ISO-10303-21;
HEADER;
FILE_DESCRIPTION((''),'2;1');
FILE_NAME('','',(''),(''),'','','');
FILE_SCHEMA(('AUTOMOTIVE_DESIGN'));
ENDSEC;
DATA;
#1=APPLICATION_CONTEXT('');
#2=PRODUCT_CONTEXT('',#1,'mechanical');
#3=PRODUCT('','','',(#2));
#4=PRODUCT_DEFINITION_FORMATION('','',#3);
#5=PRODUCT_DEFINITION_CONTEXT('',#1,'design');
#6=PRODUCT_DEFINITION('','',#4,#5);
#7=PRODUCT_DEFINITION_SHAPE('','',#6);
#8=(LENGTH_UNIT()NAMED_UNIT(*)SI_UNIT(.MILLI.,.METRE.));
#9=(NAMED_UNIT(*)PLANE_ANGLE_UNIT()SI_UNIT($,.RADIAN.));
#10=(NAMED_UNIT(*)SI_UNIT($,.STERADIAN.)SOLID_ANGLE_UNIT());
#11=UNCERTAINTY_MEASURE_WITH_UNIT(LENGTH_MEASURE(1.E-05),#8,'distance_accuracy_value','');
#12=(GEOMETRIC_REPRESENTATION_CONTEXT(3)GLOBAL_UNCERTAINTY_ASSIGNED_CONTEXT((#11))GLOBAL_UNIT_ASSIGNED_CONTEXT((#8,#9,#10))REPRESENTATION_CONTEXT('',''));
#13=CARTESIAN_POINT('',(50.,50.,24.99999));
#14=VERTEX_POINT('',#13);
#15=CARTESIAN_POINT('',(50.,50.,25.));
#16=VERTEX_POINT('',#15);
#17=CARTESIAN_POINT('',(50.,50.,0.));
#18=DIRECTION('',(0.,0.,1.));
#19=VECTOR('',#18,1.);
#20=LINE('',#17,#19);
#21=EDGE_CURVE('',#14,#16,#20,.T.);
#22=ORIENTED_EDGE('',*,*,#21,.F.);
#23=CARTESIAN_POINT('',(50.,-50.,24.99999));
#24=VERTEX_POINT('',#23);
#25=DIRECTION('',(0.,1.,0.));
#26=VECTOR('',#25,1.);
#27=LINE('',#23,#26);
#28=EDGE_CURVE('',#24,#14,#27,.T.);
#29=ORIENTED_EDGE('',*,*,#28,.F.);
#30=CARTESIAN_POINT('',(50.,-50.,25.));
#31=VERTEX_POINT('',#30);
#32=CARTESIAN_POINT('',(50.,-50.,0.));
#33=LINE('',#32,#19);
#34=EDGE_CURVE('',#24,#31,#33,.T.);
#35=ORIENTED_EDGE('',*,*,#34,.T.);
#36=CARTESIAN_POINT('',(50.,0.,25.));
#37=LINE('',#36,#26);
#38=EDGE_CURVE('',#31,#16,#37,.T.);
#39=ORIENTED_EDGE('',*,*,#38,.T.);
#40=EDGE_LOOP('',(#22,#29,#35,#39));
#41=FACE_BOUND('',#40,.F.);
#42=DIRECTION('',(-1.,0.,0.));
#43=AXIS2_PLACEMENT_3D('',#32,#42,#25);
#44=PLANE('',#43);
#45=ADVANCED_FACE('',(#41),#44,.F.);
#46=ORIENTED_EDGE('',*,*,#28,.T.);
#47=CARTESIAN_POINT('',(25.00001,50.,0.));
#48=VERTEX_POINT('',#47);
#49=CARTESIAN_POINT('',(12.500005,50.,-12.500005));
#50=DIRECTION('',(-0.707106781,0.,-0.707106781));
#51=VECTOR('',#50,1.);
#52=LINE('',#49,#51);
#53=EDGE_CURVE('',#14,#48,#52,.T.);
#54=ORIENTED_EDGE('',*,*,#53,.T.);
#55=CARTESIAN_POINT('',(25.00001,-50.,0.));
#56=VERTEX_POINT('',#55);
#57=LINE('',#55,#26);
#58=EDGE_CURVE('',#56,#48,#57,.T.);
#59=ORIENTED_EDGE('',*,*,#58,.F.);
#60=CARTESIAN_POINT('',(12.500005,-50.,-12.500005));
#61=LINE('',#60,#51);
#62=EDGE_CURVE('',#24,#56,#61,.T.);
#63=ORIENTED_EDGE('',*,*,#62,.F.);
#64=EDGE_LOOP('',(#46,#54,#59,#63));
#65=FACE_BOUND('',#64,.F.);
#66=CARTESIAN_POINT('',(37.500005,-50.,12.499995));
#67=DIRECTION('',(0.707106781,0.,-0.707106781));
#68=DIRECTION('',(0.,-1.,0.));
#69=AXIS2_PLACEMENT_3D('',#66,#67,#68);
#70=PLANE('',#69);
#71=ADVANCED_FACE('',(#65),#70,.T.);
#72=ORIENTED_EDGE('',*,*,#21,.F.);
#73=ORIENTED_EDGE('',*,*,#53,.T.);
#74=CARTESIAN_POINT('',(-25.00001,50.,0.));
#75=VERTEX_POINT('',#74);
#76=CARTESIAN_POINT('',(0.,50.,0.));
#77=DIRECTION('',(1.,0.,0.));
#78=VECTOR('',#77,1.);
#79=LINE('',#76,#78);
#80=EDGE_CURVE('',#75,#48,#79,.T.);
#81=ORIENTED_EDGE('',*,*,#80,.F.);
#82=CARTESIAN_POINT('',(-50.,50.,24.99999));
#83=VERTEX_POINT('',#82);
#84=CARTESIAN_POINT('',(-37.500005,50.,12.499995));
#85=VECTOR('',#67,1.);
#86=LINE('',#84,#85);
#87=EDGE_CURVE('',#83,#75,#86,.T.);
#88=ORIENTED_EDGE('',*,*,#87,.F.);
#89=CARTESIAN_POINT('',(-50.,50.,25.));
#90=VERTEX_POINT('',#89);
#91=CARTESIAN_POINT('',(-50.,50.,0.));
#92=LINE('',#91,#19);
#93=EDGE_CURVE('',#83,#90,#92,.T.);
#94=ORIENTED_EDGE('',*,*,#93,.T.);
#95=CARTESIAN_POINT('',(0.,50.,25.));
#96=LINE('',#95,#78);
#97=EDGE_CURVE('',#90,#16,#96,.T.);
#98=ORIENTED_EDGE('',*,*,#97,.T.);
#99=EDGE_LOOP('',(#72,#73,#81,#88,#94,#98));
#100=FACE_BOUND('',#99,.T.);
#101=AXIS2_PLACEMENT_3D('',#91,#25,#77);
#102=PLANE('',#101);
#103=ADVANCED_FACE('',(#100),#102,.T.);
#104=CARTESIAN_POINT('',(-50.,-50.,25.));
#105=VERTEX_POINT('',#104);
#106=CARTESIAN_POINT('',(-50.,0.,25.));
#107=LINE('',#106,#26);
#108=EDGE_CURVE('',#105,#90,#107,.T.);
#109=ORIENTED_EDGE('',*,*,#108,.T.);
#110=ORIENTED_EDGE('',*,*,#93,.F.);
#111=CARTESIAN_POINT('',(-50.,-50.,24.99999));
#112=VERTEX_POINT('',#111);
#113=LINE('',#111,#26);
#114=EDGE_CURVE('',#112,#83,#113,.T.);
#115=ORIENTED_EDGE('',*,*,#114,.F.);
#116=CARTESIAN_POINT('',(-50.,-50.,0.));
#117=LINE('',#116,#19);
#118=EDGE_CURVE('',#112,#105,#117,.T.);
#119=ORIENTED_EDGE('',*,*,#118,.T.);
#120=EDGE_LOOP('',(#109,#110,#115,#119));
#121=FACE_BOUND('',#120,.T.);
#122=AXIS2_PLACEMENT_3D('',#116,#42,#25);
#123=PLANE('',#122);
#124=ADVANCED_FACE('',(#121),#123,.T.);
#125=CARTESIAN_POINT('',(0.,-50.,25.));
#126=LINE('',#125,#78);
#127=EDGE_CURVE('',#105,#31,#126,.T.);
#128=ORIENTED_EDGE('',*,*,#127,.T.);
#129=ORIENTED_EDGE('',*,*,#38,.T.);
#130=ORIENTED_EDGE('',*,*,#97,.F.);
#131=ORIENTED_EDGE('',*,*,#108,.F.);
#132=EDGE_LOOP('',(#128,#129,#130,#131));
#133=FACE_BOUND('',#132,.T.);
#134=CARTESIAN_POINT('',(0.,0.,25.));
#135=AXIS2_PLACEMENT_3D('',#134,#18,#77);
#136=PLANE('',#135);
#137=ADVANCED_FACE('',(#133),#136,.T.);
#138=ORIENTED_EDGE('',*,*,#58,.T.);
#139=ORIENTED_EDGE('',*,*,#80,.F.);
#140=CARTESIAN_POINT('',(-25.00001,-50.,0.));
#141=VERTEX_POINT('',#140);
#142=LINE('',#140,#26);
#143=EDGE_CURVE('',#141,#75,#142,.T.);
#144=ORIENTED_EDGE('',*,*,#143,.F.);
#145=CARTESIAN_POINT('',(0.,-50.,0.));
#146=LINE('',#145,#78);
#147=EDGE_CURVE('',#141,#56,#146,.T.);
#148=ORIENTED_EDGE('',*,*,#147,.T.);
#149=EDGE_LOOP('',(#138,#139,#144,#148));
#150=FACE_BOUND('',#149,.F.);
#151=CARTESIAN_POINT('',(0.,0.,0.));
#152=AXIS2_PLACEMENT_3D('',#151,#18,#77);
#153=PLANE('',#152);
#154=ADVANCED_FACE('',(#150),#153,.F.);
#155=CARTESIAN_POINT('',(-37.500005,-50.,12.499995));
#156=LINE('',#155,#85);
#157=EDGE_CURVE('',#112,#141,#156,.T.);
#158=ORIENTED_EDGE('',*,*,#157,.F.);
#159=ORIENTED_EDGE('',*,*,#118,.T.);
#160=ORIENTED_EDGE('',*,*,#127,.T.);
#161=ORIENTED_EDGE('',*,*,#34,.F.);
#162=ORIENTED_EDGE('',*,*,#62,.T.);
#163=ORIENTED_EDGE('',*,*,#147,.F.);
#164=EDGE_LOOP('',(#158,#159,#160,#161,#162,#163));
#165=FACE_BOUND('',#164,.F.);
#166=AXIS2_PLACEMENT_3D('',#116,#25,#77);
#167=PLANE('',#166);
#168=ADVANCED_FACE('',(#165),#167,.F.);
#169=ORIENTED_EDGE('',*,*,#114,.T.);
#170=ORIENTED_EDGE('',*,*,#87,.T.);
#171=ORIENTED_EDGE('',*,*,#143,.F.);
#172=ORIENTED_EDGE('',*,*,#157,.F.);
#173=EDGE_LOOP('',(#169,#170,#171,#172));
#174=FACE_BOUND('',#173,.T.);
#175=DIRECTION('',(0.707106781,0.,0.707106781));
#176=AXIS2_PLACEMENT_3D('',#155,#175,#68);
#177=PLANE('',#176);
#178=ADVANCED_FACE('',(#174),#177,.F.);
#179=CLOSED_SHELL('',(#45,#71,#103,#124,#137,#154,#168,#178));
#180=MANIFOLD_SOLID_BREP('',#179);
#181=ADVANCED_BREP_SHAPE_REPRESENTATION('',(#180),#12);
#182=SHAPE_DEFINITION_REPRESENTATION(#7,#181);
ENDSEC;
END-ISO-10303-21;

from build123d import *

# Parameters (mm, degrees)
F0_W     = 100
F0_H     = 100
F1_DEPTH = 25
F2_SIZE  = 24.99999


# Not quite as in the source:
# - a fillet or chamfer is up to 0.001 mm smaller than in the source, because OpenCascade refuses the exact size


with BuildPart() as f1:
    # F0 (on Top) → F1 (new body)
    with BuildSketch(Plane.XY):
        Rectangle(F0_W, F0_H)
    extrude(amount=F1_DEPTH)

    # F2 (size 25 in the source; OpenCascade refuses exactly that, so slightly less here)
    f2_edges = [f1.edges().sort_by_distance(p)[0] for p in [
        (50, 0, 0),
        (-50, 0, 0),
    ]]
    chamfer(f2_edges, length=F2_SIZE)


solid = f1.part
